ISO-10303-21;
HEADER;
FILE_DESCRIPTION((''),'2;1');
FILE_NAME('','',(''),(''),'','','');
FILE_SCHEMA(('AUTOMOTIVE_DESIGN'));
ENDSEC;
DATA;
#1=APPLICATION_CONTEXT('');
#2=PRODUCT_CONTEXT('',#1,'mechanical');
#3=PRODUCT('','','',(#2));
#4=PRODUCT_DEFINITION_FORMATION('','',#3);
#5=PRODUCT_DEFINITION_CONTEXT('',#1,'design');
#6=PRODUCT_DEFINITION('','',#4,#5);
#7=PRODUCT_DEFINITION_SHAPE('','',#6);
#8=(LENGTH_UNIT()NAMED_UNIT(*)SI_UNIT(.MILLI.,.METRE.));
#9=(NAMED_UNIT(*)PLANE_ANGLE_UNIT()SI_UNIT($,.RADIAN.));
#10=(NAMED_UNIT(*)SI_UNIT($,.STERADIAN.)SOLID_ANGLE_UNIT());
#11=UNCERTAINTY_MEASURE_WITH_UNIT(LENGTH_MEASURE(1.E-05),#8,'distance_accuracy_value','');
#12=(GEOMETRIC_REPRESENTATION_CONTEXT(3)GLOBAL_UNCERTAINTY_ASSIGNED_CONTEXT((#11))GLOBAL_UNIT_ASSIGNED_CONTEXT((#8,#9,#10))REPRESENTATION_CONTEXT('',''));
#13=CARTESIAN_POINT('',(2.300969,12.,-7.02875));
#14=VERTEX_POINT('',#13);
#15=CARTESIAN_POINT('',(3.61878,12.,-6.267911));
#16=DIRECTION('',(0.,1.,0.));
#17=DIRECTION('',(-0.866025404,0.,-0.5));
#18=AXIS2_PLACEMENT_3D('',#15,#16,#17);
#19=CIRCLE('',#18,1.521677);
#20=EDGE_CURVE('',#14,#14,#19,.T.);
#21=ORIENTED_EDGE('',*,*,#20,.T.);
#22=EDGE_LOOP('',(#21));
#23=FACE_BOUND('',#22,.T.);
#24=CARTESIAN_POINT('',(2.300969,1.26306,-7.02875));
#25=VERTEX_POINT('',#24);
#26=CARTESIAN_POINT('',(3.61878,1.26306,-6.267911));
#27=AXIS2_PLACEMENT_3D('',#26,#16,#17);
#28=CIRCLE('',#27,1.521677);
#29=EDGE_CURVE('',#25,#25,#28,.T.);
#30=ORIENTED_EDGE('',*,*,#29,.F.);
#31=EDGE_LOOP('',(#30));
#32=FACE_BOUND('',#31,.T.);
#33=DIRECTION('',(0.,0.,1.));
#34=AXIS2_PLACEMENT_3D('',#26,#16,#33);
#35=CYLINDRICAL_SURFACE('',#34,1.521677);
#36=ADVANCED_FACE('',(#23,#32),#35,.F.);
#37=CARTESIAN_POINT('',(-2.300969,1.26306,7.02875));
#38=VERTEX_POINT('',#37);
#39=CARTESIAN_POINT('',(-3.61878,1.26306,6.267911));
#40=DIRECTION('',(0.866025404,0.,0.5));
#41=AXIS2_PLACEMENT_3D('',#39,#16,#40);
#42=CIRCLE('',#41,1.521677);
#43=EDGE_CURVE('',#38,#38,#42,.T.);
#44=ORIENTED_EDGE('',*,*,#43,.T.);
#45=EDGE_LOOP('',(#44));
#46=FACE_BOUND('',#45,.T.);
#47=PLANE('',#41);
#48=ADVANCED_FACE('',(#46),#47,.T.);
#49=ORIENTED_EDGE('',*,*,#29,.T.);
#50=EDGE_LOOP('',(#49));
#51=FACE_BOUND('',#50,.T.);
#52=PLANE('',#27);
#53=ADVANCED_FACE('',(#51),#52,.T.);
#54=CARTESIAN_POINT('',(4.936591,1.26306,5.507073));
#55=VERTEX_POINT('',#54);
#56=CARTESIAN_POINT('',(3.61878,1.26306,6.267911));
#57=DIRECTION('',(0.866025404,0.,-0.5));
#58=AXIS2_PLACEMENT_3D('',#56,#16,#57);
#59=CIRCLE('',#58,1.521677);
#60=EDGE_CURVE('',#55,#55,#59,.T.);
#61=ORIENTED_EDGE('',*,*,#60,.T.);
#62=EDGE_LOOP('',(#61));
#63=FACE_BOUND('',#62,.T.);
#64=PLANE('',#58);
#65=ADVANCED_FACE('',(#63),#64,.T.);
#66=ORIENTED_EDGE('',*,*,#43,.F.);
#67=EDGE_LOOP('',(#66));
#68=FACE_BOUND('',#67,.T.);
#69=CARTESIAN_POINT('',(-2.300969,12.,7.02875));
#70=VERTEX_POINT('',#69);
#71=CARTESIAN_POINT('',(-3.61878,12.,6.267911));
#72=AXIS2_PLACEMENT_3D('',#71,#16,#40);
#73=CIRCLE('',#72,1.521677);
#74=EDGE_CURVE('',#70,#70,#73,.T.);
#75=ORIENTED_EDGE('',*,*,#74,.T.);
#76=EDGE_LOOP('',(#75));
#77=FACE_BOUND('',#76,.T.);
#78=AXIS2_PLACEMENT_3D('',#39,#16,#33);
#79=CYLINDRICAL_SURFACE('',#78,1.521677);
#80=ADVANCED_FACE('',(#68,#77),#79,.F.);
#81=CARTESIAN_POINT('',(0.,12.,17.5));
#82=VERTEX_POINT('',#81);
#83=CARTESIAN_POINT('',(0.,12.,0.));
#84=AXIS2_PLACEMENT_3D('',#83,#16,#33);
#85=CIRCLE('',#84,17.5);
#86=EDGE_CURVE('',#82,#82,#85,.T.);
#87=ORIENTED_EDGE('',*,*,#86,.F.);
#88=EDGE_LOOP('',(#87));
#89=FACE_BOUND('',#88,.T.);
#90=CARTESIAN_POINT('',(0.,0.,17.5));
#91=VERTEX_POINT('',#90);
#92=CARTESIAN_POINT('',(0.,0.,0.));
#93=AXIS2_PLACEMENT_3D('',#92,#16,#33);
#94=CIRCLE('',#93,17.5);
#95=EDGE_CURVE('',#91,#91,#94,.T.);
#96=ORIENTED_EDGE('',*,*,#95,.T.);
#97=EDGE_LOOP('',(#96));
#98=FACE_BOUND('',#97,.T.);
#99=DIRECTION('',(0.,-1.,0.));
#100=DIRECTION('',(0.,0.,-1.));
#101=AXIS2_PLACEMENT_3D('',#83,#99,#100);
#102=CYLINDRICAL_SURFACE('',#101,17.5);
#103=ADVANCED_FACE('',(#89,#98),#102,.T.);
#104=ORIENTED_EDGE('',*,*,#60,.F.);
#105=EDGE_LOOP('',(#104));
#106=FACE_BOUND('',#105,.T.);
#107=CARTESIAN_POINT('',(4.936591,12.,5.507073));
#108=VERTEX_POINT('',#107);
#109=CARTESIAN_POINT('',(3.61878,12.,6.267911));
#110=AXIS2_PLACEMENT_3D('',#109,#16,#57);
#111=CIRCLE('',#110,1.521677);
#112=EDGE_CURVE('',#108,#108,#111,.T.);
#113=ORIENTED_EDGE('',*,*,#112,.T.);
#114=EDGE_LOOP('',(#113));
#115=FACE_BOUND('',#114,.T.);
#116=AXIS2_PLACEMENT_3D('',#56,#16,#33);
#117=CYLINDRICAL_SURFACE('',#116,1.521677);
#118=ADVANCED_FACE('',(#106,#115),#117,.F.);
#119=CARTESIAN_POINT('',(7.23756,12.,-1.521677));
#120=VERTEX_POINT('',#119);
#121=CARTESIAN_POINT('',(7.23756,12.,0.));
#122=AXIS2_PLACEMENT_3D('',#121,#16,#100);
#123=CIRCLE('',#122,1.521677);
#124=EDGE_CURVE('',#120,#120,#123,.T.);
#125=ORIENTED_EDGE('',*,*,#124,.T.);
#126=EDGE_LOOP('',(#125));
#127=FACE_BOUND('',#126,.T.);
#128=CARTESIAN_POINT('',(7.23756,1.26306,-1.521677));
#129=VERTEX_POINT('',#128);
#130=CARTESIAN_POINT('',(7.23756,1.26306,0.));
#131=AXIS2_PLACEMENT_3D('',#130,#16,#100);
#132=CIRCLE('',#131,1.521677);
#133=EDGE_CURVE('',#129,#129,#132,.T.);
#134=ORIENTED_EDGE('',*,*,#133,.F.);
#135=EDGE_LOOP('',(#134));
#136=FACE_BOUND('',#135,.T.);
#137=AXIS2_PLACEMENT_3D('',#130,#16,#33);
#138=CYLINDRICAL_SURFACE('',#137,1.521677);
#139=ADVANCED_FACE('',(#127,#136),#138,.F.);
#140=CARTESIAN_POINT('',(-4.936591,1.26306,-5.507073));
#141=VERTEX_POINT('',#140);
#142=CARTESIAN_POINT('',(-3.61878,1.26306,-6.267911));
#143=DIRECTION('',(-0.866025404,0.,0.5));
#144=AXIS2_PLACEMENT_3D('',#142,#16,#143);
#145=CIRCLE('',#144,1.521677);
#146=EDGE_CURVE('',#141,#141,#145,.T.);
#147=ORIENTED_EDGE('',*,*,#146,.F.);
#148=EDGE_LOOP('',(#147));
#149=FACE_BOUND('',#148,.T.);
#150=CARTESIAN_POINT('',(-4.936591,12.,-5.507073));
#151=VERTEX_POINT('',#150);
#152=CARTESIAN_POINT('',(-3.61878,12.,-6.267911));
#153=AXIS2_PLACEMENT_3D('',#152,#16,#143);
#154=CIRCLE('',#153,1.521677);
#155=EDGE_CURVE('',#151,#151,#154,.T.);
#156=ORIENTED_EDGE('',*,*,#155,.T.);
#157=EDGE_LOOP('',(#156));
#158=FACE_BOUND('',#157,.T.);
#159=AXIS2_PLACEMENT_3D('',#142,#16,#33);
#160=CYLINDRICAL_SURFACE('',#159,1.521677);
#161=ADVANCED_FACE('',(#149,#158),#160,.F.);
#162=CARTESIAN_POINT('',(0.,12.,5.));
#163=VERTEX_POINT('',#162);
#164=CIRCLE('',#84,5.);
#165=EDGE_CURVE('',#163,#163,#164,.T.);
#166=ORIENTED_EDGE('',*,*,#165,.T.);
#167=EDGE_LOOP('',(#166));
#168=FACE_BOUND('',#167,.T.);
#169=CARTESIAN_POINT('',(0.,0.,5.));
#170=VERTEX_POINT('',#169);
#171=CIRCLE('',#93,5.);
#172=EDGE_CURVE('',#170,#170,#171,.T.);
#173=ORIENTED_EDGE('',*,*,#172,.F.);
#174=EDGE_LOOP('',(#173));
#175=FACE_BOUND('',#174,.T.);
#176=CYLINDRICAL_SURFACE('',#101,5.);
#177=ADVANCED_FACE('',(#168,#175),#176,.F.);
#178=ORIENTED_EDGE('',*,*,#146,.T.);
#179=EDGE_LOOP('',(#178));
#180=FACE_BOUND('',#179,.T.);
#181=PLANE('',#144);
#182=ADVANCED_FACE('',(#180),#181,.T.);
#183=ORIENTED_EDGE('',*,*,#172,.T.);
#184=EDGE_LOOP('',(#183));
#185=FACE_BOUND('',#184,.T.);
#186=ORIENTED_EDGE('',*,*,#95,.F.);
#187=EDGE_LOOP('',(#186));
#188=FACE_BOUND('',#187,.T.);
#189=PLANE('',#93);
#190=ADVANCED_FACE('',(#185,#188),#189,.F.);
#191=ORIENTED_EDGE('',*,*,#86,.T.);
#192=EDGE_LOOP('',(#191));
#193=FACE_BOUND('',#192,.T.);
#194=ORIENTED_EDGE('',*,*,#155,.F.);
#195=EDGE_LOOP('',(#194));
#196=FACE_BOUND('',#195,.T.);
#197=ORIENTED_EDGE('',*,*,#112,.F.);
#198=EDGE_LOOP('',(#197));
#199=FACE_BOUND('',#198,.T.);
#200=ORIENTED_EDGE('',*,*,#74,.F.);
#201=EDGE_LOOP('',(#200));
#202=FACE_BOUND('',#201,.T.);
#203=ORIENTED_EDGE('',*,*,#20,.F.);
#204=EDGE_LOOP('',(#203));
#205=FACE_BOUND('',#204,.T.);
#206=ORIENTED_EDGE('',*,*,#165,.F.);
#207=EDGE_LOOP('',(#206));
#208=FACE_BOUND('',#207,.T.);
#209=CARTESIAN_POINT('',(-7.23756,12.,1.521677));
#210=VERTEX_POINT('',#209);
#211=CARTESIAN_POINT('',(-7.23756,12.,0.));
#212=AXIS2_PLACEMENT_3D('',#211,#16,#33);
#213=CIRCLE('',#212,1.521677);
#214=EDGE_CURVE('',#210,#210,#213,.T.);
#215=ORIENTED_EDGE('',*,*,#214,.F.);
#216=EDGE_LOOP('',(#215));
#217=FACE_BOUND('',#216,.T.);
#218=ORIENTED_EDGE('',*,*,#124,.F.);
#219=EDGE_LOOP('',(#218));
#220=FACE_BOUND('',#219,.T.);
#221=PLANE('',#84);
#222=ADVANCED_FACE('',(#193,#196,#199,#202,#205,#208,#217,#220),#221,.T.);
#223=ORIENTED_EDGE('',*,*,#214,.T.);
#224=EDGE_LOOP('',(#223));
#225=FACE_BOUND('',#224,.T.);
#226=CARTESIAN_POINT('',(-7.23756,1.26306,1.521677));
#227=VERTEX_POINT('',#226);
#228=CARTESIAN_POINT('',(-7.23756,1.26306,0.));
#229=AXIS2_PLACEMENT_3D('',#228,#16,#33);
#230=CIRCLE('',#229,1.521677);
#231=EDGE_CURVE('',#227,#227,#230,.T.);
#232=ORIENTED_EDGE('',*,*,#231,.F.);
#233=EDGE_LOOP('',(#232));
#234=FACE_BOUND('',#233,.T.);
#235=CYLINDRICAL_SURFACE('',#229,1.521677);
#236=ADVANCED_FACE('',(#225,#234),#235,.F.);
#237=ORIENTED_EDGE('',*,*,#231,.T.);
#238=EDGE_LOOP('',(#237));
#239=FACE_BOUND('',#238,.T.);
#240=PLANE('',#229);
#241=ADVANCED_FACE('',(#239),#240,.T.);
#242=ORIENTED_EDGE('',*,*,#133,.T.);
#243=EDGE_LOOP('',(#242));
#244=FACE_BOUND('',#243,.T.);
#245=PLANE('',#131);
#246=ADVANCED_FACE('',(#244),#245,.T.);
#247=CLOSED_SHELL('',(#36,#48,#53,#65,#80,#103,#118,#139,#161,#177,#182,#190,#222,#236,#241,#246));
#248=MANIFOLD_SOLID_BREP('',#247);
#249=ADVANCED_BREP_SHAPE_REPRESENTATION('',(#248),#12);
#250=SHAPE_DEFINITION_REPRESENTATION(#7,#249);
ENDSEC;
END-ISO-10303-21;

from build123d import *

# Parameters (mm, degrees)
SKETCH1_R           = 17.5
BOSS_EXTRUDE1_DEPTH = 12
SKETCH2_R           = 5
CUT_EXTRUDE1_DEPTH  = 28.504545079
SKETCH3_R           = 1.521677367
CUT_EXTRUDE2_DEPTH  = 10.736940053
CIRPATTERN1_COUNT   = 6


with BuildPart() as part:
    # Sketch1 → Boss-Extrude1 (new body)
    with BuildSketch(Plane(origin=(0, 0, 0), x_dir=(1, 0, 0), z_dir=(0, 1, 0))):
        Circle(SKETCH1_R)
    extrude(amount=BOSS_EXTRUDE1_DEPTH)

    # Sketch2 → Cut-Extrude1 (cut, through all)
    with BuildSketch(Plane(origin=(0, 0, 0), x_dir=(1, 0, 0), z_dir=(0, 1, 0))):
        Circle(SKETCH2_R)
    extrude(amount=CUT_EXTRUDE1_DEPTH, mode=Mode.SUBTRACT)

    # Sketch3 → Cut-Extrude2 (cut)
    with BuildSketch(Plane(origin=(0, 12, 0), x_dir=(1, 0, 0), z_dir=(0, 1, 0))):
        with Locations((-7.237560426, 0)):
            Circle(SKETCH3_R)
    cut_extrude2 = extrude(amount=-CUT_EXTRUDE2_DEPTH, mode=Mode.SUBTRACT)

    # CirPattern1: Cut-Extrude2 ×6 about axis
    cirpattern1_axis = Axis((0, 0, 0), (0, 1, 0))
    for i in range(1, CIRPATTERN1_COUNT):
        add(cut_extrude2.rotate(cirpattern1_axis, i * 360 / CIRPATTERN1_COUNT), mode=Mode.SUBTRACT)


solid = part.part
